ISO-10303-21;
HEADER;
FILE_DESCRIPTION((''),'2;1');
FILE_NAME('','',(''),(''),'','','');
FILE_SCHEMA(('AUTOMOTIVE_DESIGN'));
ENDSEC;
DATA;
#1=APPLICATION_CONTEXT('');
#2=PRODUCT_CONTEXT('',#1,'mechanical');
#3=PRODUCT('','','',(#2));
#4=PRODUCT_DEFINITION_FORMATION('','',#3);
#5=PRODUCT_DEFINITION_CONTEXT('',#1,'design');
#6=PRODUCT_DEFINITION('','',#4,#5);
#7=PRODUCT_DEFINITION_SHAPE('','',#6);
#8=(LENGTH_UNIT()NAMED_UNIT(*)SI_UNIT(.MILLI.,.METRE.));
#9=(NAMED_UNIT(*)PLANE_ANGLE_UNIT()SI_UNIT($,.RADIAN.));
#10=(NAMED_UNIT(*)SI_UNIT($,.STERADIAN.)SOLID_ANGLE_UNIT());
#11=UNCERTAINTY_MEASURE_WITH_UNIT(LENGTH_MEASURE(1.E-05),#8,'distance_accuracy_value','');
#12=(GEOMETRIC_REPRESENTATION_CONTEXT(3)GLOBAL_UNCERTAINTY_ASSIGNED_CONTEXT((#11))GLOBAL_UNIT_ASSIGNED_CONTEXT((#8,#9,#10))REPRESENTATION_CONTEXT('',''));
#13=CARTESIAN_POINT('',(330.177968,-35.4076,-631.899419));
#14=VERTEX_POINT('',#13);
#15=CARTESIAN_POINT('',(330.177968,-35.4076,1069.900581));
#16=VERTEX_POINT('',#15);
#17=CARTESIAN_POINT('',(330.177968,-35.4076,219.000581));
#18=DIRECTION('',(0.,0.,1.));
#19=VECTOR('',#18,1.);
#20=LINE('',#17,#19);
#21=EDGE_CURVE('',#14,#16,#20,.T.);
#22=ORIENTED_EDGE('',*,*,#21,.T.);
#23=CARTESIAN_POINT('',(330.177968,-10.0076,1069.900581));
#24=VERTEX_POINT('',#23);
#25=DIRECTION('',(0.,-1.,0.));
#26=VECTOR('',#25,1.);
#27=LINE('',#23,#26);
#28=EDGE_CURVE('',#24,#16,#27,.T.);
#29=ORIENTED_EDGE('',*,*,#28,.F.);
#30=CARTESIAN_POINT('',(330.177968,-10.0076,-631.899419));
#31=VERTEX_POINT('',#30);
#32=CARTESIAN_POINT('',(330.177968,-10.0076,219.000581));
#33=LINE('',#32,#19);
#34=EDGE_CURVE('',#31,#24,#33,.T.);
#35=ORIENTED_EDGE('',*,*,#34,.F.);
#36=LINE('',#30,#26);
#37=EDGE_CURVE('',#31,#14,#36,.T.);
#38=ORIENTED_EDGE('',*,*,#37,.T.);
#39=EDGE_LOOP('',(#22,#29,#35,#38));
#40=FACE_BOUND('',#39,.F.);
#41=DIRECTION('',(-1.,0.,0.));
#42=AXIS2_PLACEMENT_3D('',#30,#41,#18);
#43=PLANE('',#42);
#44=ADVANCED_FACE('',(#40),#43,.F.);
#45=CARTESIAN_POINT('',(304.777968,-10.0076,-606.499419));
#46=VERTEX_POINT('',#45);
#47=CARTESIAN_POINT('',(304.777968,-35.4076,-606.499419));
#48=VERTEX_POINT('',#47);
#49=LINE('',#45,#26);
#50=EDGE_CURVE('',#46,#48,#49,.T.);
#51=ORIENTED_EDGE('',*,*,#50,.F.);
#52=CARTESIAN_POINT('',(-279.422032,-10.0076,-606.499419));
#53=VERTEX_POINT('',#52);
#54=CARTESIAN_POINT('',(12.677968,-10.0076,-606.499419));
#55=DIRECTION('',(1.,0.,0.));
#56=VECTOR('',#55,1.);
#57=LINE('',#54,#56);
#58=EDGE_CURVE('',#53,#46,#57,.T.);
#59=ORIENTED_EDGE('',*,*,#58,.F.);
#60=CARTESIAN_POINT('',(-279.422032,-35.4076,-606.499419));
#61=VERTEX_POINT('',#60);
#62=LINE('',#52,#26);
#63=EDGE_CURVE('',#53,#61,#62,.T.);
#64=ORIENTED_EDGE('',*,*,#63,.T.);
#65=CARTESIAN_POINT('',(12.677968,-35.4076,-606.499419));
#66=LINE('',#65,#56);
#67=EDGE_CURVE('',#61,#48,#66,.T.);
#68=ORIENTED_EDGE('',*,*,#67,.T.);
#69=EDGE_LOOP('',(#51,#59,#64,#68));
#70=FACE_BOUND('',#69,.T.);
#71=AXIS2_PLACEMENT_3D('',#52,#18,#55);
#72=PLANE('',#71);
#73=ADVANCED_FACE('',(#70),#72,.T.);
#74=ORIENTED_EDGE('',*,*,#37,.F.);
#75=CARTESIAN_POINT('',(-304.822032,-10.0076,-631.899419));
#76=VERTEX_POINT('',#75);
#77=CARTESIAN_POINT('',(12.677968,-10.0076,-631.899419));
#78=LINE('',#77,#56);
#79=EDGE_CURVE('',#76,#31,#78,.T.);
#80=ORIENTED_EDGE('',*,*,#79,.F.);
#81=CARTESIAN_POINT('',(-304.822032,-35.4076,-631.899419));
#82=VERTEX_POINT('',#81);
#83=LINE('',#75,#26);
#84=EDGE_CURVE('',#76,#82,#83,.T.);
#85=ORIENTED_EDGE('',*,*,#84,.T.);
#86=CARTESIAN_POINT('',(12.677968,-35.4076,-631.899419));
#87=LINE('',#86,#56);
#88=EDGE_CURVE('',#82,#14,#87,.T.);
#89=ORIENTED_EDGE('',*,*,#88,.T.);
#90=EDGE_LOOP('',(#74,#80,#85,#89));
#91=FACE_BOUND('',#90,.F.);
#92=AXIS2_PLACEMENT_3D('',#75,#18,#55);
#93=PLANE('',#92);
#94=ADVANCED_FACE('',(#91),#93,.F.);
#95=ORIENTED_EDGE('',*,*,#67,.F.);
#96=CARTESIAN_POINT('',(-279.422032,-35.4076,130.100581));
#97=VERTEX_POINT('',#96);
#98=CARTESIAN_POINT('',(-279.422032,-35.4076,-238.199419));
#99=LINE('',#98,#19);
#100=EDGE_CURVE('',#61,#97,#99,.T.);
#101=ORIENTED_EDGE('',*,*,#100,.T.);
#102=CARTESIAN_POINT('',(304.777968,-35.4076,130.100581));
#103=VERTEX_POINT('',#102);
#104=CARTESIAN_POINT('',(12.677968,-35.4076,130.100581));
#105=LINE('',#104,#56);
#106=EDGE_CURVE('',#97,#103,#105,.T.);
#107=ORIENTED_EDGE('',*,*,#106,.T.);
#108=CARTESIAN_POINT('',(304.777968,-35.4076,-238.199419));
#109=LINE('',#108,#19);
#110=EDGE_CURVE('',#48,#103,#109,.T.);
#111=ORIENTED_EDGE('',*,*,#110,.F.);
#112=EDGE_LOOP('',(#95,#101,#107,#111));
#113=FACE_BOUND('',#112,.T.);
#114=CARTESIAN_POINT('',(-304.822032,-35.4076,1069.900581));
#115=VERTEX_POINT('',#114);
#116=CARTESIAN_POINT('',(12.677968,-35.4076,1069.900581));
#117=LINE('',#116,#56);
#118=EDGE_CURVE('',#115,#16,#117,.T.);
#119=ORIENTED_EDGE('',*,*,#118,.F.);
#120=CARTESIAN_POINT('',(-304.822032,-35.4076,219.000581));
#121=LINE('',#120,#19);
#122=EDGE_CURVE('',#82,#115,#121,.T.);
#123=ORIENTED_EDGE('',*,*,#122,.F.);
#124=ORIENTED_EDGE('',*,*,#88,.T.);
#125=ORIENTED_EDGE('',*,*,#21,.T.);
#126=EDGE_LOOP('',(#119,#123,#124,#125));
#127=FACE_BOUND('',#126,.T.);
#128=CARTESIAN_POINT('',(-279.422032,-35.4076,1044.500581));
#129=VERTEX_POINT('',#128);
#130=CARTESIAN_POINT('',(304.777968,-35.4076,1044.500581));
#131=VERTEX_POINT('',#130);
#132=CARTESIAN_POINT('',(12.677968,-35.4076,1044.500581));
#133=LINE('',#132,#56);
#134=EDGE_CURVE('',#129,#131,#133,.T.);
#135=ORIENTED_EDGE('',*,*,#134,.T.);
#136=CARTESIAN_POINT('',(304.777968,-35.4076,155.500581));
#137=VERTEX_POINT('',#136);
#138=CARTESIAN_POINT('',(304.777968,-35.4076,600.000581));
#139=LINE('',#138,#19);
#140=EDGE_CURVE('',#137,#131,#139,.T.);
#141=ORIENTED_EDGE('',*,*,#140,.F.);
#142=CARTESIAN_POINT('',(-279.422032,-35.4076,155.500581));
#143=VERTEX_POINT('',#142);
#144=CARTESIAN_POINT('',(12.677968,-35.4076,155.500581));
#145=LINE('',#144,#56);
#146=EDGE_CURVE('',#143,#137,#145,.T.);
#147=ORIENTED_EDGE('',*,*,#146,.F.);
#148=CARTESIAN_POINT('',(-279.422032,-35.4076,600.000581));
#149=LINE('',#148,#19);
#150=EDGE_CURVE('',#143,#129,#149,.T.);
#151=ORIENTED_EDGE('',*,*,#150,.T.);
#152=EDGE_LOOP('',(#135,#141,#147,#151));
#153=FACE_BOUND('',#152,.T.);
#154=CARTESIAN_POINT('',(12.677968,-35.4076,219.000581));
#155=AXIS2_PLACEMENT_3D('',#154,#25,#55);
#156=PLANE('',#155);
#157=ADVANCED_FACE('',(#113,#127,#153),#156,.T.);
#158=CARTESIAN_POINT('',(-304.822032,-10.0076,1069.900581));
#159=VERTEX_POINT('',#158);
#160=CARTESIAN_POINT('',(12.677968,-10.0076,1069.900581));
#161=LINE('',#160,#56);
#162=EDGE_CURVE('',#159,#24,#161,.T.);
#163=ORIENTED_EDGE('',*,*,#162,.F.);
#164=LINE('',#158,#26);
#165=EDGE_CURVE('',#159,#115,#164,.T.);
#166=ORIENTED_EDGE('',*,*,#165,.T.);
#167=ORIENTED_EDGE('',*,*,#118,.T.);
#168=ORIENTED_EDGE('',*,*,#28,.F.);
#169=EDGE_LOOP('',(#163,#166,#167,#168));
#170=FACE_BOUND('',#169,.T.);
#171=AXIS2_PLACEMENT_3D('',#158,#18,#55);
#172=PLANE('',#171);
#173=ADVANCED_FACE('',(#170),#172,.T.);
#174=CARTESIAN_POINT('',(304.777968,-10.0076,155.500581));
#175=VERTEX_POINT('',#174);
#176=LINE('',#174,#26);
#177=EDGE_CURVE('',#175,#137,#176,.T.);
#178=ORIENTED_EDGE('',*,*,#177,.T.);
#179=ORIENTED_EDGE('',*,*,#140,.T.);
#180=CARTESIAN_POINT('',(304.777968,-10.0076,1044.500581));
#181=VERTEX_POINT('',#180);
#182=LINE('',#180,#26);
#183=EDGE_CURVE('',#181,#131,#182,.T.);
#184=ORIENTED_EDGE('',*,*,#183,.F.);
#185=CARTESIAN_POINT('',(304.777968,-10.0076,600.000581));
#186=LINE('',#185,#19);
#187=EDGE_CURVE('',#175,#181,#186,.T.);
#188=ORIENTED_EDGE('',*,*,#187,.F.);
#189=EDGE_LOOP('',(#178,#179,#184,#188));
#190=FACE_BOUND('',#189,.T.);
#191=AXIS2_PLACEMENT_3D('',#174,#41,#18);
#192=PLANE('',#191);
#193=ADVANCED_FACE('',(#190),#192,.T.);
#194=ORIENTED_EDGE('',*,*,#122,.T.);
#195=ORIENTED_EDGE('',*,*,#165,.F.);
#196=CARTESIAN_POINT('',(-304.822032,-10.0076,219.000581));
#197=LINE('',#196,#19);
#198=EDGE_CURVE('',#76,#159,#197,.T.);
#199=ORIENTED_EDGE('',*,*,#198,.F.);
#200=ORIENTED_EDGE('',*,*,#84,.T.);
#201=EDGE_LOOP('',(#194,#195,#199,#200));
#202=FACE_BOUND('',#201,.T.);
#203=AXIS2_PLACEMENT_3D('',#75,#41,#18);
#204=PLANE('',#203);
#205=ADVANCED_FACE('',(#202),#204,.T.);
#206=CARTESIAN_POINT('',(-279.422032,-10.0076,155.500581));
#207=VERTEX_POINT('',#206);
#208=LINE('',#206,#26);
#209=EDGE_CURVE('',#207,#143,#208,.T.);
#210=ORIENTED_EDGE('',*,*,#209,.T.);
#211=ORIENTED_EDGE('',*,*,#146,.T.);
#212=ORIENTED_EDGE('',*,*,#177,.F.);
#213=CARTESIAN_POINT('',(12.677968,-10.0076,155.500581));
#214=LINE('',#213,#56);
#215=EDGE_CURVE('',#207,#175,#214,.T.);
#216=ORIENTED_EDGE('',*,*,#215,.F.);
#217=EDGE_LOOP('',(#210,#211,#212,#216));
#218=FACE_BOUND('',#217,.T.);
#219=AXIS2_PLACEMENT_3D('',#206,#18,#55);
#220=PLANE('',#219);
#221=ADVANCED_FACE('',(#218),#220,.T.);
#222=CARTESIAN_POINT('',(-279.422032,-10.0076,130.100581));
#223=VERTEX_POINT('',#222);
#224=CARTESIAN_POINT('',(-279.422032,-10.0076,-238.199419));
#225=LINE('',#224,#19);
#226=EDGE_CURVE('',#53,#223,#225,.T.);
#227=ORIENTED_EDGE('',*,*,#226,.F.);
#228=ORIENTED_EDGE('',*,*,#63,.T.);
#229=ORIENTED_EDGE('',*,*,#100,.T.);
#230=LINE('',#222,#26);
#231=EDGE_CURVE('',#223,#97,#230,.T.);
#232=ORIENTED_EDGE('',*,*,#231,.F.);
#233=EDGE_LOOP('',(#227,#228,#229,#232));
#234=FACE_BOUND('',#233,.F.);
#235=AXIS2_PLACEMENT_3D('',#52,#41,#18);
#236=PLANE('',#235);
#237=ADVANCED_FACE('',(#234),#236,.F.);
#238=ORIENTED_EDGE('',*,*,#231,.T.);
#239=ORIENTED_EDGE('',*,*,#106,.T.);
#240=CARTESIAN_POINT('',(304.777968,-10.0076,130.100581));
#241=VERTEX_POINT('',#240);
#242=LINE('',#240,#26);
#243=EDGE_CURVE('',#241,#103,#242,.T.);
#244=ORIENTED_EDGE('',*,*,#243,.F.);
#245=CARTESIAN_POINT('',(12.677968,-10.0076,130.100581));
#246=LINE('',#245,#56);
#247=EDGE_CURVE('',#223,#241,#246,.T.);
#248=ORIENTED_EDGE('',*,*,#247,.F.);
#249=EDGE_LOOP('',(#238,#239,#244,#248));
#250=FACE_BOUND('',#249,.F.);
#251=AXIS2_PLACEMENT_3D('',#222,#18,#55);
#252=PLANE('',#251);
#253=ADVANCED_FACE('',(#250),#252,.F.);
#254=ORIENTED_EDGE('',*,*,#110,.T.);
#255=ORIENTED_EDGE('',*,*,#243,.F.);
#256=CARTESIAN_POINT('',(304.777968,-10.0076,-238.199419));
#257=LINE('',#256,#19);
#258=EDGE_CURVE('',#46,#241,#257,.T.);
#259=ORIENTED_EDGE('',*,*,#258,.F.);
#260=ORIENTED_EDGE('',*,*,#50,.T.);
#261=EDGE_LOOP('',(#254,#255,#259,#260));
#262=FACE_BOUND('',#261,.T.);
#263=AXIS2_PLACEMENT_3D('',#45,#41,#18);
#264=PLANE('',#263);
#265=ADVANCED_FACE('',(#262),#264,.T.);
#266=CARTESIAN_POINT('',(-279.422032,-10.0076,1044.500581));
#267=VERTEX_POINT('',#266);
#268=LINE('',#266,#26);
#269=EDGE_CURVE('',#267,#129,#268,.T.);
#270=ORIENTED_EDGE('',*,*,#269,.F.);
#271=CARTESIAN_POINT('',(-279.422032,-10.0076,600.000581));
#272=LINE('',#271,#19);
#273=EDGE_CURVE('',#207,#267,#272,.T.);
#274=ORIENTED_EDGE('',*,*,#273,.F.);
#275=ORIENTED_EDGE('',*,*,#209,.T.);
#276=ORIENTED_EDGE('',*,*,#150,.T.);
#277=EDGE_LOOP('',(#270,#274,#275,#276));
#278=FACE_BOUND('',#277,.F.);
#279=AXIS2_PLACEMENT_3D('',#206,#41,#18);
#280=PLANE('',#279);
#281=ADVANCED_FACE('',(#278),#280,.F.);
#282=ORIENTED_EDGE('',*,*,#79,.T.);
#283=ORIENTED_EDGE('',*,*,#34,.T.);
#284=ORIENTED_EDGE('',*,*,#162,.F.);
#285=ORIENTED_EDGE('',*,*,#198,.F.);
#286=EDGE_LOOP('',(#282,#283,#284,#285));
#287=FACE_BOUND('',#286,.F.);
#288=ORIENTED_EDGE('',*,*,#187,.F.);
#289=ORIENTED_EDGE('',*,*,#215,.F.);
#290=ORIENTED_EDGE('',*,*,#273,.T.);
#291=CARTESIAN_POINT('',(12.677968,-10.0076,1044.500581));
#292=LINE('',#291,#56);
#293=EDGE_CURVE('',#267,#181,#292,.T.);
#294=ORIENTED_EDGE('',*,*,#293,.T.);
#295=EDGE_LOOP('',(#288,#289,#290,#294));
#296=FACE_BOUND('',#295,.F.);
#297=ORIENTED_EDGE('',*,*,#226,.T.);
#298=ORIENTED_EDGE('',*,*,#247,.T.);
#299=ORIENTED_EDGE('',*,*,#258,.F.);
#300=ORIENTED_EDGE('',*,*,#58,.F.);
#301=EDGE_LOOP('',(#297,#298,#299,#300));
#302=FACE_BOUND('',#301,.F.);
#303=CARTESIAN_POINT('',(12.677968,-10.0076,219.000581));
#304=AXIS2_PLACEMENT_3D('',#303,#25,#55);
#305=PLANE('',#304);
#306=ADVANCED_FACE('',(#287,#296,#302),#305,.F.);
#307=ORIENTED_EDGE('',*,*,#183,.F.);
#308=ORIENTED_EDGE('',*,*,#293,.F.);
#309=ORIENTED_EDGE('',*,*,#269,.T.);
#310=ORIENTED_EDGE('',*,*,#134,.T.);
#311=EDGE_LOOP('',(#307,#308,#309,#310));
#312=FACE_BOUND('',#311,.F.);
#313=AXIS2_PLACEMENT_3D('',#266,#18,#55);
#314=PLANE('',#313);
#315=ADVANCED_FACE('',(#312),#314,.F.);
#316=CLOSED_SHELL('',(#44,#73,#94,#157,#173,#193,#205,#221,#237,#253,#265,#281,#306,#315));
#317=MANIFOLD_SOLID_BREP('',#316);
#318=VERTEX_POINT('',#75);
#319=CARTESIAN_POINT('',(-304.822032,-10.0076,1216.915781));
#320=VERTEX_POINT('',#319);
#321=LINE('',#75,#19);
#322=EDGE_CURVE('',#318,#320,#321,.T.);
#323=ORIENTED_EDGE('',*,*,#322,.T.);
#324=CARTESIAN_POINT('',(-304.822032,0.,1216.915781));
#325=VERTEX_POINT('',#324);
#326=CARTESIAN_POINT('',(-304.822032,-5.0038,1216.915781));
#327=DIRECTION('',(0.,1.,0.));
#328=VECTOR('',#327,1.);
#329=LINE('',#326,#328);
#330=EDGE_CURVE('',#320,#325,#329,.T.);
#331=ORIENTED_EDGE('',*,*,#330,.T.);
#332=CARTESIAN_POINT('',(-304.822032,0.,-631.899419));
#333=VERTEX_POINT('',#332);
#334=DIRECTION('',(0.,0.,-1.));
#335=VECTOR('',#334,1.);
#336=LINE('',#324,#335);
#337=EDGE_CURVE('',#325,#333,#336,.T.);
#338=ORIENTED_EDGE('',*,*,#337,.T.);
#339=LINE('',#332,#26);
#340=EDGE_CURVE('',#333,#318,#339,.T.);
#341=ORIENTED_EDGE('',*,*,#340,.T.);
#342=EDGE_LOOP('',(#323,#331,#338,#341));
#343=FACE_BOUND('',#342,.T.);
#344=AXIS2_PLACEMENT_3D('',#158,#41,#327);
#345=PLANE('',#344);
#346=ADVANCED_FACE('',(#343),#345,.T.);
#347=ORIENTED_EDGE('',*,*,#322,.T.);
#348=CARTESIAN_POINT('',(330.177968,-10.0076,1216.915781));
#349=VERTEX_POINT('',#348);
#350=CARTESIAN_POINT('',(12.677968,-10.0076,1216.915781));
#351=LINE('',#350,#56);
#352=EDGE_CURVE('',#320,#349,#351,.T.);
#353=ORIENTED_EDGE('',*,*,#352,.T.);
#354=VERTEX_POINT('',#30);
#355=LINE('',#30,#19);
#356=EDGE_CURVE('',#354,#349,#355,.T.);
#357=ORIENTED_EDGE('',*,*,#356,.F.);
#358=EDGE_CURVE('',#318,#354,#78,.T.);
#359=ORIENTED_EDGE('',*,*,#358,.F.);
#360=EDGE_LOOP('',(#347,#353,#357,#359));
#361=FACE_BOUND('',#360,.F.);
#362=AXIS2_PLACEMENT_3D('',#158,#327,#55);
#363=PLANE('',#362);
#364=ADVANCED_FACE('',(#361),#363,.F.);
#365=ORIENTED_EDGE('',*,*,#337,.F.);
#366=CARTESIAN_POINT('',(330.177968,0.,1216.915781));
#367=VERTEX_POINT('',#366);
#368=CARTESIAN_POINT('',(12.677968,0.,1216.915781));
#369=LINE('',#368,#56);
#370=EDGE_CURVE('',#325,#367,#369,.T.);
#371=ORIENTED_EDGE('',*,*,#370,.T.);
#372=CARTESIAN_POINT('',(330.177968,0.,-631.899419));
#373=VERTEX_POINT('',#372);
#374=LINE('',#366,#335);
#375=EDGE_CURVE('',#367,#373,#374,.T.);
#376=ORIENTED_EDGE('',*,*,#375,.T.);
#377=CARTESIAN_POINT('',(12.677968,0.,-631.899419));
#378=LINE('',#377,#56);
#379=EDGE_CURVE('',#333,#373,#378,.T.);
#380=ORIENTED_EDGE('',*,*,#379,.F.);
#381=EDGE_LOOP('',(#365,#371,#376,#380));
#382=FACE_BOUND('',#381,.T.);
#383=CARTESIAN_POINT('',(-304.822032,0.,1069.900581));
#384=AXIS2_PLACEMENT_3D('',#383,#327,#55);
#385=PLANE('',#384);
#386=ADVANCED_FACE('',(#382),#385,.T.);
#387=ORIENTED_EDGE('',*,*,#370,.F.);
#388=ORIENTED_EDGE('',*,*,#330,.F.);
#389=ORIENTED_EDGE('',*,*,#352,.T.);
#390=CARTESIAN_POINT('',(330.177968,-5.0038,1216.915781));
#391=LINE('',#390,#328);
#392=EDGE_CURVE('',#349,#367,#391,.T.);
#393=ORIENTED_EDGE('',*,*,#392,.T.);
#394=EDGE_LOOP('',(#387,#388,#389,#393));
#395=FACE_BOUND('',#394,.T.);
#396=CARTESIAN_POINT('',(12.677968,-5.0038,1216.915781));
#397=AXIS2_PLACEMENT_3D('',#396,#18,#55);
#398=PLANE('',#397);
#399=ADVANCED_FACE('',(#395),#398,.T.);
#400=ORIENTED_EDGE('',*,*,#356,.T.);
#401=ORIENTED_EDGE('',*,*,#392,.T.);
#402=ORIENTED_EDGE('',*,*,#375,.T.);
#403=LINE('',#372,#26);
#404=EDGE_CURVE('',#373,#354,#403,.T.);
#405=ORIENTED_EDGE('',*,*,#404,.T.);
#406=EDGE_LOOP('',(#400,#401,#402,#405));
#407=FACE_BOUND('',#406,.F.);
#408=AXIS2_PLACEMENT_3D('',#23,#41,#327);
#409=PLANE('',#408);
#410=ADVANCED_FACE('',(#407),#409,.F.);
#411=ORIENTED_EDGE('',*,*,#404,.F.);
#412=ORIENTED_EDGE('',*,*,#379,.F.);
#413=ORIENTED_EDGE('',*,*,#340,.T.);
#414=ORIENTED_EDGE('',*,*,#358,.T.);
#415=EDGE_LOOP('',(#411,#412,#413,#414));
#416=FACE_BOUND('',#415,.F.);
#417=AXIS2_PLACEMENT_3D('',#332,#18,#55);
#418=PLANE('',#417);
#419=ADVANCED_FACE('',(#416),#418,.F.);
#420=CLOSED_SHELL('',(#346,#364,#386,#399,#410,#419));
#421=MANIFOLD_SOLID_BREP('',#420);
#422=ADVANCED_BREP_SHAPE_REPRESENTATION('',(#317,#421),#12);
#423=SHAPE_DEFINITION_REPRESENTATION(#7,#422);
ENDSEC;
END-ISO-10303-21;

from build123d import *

# Parameters (mm, degrees)
F0_W     = 635
F0_H     = 1701.8
F1_DEPTH = 10.0076
F2_W     = 635
F2_H     = 1701.8
F2_W_2   = 584.2
F2_H_2   = 736.6
F2_H_3   = 889
F3_DEPTH = 25.4
F4_W     = 635
F4_H     = 10.0076
F5_DEPTH = 147.0152


with BuildPart() as f1:
    # F0 (on Front) → F1 (new body)
    with BuildSketch(Plane.XZ):
        with Locations((12.6779675484, 219.000581247)):
            Rectangle(F0_W, F0_H)
    extrude(amount=F1_DEPTH)

    # F4 (on face) → F5 (join)
    with BuildSketch(Plane.XY.offset(1069.900581247)):
        with Locations((12.6779675484, -5.0038)):
            Rectangle(F4_W, F4_H)
    extrude(amount=F5_DEPTH)


with BuildPart() as f3:
    # F2 (on face) → F3 (new body)
    with BuildSketch(Plane.XZ.offset(10.0076)):
        with Locations((12.6779675484, 219.000581247)):
            Rectangle(F2_W, F2_H)
        with Locations((12.6779675484, -238.199418753)):
            Rectangle(F2_W_2, F2_H_2, mode=Mode.SUBTRACT)
        with Locations((12.6779675484, 600.000581247)):
            Rectangle(F2_W_2, F2_H_3, mode=Mode.SUBTRACT)
    extrude(amount=F3_DEPTH)


solid = Compound([f1.part, f3.part])
